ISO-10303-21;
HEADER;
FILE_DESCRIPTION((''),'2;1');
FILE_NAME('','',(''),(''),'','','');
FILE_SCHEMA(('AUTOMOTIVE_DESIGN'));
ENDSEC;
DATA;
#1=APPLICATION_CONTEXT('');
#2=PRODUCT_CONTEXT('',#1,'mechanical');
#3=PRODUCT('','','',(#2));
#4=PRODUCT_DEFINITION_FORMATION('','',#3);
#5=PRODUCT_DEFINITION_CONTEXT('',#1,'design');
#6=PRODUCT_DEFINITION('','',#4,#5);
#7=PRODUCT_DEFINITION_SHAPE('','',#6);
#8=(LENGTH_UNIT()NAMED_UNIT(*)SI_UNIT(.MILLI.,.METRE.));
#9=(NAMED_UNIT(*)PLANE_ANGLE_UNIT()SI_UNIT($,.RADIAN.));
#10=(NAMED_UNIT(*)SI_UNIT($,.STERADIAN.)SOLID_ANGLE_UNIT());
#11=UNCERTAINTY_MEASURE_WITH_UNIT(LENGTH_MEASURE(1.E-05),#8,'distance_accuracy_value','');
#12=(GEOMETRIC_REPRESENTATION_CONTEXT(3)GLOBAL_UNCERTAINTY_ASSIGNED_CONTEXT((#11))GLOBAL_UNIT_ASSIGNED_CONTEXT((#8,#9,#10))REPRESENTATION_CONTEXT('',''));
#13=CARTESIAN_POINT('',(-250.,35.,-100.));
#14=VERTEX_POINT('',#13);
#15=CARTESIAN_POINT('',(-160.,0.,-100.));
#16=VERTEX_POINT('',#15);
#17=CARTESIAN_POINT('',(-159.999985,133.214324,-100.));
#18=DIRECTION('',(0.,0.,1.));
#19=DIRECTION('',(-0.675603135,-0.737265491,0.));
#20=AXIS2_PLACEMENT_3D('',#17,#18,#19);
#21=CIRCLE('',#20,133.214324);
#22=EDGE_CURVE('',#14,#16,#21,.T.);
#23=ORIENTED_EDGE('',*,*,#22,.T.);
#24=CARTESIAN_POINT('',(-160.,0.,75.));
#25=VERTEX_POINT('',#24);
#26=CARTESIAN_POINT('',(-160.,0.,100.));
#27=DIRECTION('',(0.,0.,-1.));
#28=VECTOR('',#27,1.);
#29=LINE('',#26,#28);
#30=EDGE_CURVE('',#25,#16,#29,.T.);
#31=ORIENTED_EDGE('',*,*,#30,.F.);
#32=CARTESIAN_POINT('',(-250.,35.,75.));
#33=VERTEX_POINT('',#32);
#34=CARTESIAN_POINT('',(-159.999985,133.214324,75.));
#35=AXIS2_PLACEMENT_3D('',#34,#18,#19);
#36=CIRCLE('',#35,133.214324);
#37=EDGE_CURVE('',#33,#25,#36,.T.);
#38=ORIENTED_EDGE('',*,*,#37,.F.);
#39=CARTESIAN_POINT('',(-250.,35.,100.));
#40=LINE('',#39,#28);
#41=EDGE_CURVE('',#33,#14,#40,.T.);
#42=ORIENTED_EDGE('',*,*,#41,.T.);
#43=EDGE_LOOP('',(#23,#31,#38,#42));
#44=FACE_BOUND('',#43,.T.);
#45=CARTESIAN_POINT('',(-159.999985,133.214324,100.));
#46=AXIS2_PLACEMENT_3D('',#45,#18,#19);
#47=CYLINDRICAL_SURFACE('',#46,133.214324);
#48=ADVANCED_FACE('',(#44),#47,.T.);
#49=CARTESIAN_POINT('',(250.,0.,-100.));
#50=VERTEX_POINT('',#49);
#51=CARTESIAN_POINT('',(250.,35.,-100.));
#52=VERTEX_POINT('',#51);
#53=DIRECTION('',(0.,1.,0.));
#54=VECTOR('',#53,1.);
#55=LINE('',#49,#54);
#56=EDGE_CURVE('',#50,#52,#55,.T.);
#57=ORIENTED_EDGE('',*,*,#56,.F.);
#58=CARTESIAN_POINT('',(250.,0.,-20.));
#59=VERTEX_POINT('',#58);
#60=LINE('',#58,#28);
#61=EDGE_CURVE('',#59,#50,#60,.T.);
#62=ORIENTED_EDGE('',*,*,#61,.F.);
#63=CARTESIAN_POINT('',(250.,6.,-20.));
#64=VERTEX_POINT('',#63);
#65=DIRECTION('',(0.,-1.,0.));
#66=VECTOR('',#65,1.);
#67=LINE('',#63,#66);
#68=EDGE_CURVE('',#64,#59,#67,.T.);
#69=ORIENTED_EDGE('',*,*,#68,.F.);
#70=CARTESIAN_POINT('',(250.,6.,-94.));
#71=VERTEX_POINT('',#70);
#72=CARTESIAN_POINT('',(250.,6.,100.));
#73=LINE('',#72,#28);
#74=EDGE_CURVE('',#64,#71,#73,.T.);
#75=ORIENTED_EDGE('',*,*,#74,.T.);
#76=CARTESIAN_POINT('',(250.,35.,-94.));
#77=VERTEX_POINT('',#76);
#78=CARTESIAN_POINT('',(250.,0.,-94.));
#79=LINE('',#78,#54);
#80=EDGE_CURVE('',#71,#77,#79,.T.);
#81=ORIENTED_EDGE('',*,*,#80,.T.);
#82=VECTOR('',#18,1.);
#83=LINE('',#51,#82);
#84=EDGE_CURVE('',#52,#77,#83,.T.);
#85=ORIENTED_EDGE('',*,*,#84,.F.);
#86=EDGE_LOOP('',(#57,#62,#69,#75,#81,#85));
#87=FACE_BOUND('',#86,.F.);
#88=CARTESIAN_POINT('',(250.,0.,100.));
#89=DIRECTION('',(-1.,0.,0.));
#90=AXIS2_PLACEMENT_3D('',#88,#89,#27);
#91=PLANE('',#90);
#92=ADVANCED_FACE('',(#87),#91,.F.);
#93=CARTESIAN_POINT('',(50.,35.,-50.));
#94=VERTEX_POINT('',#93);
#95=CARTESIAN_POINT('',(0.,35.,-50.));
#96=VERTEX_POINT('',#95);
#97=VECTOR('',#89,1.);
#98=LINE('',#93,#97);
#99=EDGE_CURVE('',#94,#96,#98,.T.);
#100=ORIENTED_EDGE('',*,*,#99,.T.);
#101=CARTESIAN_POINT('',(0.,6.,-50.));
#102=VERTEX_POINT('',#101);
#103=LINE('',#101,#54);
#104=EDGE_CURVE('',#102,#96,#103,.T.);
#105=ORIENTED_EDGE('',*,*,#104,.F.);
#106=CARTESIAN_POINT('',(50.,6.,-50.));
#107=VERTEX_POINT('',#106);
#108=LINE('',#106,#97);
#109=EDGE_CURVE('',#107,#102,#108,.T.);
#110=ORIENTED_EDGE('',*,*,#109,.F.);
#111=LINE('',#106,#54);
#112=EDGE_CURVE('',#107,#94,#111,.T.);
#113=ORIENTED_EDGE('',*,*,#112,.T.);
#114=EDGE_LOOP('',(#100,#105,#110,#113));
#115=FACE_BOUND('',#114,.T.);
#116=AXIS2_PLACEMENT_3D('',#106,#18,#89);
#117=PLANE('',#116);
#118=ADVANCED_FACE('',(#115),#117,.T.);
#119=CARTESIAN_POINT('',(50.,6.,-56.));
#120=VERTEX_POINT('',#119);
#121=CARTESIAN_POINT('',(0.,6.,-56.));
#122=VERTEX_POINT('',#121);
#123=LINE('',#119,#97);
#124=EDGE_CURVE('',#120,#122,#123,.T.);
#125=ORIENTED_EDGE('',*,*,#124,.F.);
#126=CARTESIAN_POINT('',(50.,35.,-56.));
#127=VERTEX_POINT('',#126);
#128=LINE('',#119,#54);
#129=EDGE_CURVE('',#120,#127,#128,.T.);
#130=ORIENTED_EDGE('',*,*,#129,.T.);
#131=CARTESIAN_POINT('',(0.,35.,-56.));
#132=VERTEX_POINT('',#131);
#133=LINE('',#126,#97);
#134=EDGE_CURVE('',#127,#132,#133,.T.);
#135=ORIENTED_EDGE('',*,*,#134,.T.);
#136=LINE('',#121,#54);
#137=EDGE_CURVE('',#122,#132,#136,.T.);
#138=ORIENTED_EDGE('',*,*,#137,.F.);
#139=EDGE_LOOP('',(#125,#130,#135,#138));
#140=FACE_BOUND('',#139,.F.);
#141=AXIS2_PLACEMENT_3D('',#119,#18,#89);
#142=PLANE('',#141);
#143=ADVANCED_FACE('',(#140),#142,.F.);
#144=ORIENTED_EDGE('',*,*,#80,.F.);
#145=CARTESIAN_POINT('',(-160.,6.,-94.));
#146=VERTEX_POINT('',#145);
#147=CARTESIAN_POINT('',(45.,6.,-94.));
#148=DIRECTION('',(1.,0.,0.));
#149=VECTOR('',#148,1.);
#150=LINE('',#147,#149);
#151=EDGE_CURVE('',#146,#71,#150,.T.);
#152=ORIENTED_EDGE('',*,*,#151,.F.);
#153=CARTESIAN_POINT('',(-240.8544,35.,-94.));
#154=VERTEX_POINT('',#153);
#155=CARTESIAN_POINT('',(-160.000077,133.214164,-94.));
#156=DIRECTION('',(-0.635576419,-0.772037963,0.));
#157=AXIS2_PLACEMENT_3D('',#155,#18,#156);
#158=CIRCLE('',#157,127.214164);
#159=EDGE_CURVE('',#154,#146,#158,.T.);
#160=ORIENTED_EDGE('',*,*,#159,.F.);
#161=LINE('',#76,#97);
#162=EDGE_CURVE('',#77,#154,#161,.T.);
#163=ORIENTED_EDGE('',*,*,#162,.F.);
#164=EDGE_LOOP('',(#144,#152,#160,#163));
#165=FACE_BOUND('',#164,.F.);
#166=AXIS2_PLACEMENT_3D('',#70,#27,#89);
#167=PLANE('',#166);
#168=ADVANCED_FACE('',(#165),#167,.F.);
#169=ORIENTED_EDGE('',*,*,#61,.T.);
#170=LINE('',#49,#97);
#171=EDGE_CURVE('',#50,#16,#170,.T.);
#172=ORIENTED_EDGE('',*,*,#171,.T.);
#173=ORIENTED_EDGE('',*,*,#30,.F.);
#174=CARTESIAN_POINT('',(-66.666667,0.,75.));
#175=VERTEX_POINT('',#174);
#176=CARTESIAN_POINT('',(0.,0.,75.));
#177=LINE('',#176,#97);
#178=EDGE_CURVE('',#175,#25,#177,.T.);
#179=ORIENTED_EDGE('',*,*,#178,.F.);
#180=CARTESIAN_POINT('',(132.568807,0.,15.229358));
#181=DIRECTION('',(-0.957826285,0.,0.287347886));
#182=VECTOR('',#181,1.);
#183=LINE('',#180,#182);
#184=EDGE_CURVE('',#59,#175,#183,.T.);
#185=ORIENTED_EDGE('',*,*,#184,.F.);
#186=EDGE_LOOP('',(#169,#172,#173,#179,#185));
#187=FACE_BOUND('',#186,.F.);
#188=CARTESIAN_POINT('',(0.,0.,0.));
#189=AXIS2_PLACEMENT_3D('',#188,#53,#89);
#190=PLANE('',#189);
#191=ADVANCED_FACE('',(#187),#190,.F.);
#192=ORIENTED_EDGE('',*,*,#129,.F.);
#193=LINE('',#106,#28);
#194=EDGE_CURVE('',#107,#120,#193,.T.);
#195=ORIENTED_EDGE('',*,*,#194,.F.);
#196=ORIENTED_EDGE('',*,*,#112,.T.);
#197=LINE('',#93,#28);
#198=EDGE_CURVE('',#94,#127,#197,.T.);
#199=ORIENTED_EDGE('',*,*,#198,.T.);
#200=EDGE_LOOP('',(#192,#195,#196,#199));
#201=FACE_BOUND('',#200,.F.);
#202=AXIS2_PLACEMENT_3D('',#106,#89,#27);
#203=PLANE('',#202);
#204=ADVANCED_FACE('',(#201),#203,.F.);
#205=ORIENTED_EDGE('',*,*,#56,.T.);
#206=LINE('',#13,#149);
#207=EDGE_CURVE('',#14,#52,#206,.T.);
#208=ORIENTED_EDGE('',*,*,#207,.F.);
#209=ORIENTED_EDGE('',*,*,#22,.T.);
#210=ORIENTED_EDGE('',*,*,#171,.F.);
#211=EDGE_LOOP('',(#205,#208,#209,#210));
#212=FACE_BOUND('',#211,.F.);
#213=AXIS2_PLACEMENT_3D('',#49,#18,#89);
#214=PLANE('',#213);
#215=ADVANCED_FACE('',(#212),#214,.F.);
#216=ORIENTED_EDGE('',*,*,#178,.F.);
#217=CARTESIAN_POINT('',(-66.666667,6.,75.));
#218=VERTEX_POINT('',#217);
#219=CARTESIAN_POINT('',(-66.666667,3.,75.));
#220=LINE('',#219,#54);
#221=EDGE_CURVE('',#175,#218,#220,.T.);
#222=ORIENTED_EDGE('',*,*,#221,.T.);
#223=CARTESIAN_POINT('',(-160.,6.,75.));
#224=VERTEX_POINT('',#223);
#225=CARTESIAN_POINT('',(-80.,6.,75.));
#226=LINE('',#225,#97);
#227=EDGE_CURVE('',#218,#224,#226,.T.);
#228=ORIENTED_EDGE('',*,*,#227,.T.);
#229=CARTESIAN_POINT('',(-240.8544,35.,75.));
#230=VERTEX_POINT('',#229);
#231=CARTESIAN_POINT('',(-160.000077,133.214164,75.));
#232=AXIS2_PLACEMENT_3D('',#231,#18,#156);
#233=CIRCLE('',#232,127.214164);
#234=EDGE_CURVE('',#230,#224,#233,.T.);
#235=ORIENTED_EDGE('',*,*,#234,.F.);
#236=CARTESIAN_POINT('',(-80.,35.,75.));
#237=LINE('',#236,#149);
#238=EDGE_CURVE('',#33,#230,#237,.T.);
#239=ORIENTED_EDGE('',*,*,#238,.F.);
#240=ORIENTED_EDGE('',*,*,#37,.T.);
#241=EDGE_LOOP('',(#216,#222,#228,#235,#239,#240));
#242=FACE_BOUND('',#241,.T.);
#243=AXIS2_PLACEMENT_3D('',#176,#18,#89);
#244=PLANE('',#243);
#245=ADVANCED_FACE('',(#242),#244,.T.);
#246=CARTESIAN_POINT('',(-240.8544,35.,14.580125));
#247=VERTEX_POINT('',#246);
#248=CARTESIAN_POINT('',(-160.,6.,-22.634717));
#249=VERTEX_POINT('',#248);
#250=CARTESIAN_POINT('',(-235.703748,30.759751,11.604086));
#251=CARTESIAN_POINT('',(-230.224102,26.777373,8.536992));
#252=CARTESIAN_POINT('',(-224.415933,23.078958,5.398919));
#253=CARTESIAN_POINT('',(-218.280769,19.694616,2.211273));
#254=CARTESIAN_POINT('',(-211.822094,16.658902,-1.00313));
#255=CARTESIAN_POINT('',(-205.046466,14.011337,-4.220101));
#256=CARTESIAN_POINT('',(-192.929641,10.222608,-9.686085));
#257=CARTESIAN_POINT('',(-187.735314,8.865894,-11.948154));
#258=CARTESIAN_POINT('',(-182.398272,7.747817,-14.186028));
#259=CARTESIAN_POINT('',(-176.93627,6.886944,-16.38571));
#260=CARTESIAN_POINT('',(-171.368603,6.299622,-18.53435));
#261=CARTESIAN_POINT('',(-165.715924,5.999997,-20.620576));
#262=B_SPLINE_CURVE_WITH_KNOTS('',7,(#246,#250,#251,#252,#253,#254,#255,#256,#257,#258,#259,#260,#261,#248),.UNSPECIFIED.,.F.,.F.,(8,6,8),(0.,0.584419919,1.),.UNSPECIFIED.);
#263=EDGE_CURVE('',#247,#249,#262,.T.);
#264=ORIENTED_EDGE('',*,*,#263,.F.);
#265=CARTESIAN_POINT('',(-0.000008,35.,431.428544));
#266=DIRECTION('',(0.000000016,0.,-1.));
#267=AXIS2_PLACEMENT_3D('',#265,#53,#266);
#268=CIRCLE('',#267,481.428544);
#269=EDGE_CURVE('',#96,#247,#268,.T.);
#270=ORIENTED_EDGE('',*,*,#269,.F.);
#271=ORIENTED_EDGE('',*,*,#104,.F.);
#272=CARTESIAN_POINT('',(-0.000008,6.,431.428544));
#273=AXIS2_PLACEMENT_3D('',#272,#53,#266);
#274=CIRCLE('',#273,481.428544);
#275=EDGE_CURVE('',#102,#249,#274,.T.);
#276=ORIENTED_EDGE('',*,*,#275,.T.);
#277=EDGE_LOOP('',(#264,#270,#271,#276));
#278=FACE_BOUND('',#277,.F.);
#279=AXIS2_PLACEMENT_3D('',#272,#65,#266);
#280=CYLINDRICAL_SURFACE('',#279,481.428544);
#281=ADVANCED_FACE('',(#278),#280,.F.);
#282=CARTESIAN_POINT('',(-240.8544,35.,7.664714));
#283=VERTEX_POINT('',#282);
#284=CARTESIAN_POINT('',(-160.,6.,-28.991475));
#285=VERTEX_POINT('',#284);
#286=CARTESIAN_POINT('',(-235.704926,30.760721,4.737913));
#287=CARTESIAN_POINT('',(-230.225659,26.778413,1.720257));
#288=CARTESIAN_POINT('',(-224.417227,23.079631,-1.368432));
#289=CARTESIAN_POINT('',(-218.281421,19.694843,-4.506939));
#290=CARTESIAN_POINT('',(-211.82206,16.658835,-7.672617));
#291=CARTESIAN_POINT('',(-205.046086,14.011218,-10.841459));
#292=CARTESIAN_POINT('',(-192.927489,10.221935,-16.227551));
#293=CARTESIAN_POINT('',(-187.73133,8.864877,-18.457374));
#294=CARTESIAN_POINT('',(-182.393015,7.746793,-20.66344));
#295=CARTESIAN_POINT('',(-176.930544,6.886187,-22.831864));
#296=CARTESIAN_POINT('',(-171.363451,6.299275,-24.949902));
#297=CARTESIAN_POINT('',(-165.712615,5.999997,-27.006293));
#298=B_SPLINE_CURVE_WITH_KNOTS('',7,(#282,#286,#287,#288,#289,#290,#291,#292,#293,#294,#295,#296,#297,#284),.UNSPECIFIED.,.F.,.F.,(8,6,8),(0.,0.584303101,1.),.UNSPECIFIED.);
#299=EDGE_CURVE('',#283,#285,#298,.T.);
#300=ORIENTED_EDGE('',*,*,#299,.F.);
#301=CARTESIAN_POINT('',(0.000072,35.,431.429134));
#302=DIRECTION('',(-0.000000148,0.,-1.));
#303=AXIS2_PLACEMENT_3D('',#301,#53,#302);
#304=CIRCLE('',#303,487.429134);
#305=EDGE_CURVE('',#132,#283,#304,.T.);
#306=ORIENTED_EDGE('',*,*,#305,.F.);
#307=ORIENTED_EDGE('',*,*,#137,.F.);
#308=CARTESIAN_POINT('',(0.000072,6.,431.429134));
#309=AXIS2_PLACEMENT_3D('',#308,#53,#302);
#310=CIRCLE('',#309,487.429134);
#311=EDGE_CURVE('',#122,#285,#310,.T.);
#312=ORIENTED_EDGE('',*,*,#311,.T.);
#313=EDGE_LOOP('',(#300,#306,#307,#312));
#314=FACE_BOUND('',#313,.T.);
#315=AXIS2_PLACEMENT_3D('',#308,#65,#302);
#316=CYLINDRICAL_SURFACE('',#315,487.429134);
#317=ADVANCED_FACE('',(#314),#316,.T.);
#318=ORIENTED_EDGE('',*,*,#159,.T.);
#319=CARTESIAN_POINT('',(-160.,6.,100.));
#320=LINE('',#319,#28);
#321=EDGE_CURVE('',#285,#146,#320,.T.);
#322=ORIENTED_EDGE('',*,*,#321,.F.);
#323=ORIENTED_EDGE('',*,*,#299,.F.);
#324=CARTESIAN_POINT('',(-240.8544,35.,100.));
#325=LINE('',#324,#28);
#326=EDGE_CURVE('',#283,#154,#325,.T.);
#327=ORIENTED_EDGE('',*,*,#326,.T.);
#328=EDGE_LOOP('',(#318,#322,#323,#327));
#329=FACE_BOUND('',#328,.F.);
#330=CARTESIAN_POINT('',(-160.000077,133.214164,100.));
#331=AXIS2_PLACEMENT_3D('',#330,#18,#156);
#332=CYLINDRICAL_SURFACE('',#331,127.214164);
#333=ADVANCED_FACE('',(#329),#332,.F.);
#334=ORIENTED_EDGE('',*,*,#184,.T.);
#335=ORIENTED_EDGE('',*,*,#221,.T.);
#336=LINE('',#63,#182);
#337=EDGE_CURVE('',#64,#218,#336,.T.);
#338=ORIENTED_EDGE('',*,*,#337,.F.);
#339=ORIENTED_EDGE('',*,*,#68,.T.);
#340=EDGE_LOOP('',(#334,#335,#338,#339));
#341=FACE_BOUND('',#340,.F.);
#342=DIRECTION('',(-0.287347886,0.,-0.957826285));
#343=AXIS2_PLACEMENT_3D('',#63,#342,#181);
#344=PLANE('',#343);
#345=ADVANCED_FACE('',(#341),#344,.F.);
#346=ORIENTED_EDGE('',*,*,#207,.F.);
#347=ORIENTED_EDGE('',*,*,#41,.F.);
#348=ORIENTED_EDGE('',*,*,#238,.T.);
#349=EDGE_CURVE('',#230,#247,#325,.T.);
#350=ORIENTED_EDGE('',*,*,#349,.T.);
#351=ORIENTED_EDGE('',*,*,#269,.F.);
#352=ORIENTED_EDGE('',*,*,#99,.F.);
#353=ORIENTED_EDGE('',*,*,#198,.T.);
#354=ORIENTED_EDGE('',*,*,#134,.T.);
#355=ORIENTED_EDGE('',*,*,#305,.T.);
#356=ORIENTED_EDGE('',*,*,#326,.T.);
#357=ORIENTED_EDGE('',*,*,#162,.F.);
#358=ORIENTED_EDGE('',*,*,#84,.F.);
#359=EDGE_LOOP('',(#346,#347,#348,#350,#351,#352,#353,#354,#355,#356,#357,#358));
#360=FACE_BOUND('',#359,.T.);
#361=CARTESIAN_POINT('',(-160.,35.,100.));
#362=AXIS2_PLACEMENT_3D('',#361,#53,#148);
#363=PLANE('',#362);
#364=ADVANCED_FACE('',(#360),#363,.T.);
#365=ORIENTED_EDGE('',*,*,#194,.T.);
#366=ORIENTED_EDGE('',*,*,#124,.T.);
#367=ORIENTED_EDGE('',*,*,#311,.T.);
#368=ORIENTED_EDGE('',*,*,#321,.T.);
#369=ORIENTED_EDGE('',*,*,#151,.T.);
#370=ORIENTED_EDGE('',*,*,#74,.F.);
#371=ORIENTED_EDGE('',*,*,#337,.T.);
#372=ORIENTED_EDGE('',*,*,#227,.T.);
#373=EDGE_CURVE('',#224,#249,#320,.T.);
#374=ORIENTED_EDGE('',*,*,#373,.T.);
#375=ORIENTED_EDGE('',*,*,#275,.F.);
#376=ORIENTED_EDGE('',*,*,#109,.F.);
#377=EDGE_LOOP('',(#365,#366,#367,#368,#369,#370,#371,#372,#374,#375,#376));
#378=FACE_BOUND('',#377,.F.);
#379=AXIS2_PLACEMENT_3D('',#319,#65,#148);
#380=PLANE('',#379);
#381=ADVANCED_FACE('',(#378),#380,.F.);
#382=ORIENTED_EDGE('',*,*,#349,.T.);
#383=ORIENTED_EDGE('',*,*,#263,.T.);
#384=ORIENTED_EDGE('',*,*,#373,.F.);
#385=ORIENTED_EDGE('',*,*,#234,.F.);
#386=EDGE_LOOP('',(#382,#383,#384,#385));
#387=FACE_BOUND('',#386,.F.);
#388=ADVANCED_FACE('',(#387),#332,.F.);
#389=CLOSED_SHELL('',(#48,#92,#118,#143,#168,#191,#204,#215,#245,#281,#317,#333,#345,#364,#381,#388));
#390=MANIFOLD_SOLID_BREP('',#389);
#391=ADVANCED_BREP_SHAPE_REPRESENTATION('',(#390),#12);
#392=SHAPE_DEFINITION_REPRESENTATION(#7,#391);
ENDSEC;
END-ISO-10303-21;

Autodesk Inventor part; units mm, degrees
ref_plane "YZ Plane" through (0, 0, 0) normal (1, 0, 0) x (0, 1, 0)
ref_plane "XZ Plane" through (0, 0, 0) normal (0, 1, 0) x (-1, 0, 0)
ref_plane "XY Plane" through (0, 0, 0) normal (0, 0, 1) x (1, 0, 0)
sketch "スケッチ1" plane through (0, 0, 0) normal (0, 1, 0) x (-1, 0, 0)
  line L0 (250, 100) -> (-250, 100)
  line L1 (-250, 100) -> (-250, -100)
  line L2 (-250, -100) -> (250, -100)
  line L3 (250, -100) -> (250, 100)
  point P0 (0, 0)
  dimension "d2" = 250
  dimension "d3" = 500
  dimension "d4" = 100
  dimension "d5" = 200
extrude "押し出し1" add sketch "スケッチ1" along normal blind 35
sketch "スケッチ2" plane through (-250, 0, 100) normal (0, 0, 1) x (1, 0, 0)
  line L0 (0, 35) -> (500, 35) projected
  line L1 (0, 0) -> (500, 0) projected
  arc A0 (0, 35) -> (90, 0) centre (90, 133.2143) ccw
  line L2 (0, 0) -> (0, 35) projected
  point P0 (250, 0)
  dimension "d8" = 90
extrude "押し出し2" cut sketch "スケッチ2" against normal through all
sketch "スケッチ5" plane through (-160, 0, 100) normal (0, 0, 1) x (1, 0, 0)
  arc A0 (-90, 35) -> (0, 0) centre (0, 133.2143) ccw projected
  line L0 (0, 0) -> (410, 0) projected
  arc A1 (-80.8544, 35) -> (0, 6) centre (0, 133.2143) ccw
  line L1 (0, 6) -> (54.4195, 6)
  line L2 (54.4195, 6) -> (410, 6)
  line L3 (-90, 35) -> (410, 35) projected
  line L4 (410, 0) -> (410, 35) projected
  point P0 (160, 0)
  point P1 (40, 35)
  dimension "d20" = 6
extrude "押し出し5" cut sketch "スケッチ5" against normal through all contours L3 L4 L2 L1 A1
sketch "スケッチ8" plane through (-160, 6, 100) normal (0, 1, 0) x (1, 0, 0)
  line L0 (210, 150) -> (160, 150)
  line L1 (410, 200) -> (410, 0) projected
  line L2 (0, 200) -> (410, 200) projected
  arc A0 (160, 150) -> (-90, 80) centre (160, -331.4286) ccw
  line L3 (-90, 200) -> (-90, 0) projected
  line L4 (-80.8544, 200) -> (0, 200) projected
  line L5 (-80.8544, 200) -> (-90, 200) projected
  line L6 (210, 156) -> (160, 156)
  arc A1 (160, 156) -> (-90, 87.005) centre (160, -331.4286) ccw
  line L7 (210, 150) -> (210, 156)
  line L8 (410, 0) -> (410, 200) projected
  line L9 (-90, 87.005) -> (-90, 80)
  point P0 (160, 100)
  dimension "d35" = 50
  dimension "d36" = 120
  dimension "d38" = 6
  dimension "d47" = 250
  dimension "d48" = 50
extrude "押し出し7" add sketch "スケッチ8" along normal up to surface (29 mm away)
delete faces "面を削除1" heal yes whole lump no faces at (-246.2129, 22.2141, 17.7225) (-250, 25.3333, 15.33) (-244.511, 6, 14.4766) (-246.2115, 22.2135, 10.7547)
sketch "スケッチ10" plane through (-160, 6, 100) normal (0, 1, 0) x (1, 0, 0)
  line L0 (410, 150) -> (410, 0) projected
  line L1 (410, 0) -> (0, 0) projected
  line L2 (410, 0) -> (410, 200) projected
  line L3 (410, 120) -> (10, 0)
  line L4 (0, 0) -> (410, 0) projected
  point P0 (160, 100)
  point P1 (210, 150)
  dimension "d43" = 400
  dimension "d44" = 120
extrude "押し出し9" cut sketch "スケッチ10" against normal through all
sketch "スケッチ11" plane through (250, 6, -100) normal (0, 0, -1) x (-1, 0, 0)
  line L0 (0, -6) -> (410, -6) projected
  arc A0 (410, -6) -> (500, 29) centre (410, 127.2143) ccw projected
  line L1 (0, -6) -> (0, 29)
  line L2 (0, 29) -> (500, 29)
  point P0 (250, -6)
extrude "押し出し10" add sketch "スケッチ11" against normal blind 6
sketch "スケッチ12" plane through (0, 0, 0) normal (0, 1, 0) x (-1, 0, 0)
  line L0 (250, -100) -> (250, 100) projected
  line L1 (250, 100) -> (0, 100)
  line L2 (0, 100) -> (0, 75)
  line L3 (0, 75) -> (250, 75)
  line L4 (250, 75) -> (250, 100)
  point P0 (0, 0)
  dimension "d51" = 25
extrude "押し出し11" cut sketch "スケッチ12" along normal through all
properties part number "endplate_ver2"
